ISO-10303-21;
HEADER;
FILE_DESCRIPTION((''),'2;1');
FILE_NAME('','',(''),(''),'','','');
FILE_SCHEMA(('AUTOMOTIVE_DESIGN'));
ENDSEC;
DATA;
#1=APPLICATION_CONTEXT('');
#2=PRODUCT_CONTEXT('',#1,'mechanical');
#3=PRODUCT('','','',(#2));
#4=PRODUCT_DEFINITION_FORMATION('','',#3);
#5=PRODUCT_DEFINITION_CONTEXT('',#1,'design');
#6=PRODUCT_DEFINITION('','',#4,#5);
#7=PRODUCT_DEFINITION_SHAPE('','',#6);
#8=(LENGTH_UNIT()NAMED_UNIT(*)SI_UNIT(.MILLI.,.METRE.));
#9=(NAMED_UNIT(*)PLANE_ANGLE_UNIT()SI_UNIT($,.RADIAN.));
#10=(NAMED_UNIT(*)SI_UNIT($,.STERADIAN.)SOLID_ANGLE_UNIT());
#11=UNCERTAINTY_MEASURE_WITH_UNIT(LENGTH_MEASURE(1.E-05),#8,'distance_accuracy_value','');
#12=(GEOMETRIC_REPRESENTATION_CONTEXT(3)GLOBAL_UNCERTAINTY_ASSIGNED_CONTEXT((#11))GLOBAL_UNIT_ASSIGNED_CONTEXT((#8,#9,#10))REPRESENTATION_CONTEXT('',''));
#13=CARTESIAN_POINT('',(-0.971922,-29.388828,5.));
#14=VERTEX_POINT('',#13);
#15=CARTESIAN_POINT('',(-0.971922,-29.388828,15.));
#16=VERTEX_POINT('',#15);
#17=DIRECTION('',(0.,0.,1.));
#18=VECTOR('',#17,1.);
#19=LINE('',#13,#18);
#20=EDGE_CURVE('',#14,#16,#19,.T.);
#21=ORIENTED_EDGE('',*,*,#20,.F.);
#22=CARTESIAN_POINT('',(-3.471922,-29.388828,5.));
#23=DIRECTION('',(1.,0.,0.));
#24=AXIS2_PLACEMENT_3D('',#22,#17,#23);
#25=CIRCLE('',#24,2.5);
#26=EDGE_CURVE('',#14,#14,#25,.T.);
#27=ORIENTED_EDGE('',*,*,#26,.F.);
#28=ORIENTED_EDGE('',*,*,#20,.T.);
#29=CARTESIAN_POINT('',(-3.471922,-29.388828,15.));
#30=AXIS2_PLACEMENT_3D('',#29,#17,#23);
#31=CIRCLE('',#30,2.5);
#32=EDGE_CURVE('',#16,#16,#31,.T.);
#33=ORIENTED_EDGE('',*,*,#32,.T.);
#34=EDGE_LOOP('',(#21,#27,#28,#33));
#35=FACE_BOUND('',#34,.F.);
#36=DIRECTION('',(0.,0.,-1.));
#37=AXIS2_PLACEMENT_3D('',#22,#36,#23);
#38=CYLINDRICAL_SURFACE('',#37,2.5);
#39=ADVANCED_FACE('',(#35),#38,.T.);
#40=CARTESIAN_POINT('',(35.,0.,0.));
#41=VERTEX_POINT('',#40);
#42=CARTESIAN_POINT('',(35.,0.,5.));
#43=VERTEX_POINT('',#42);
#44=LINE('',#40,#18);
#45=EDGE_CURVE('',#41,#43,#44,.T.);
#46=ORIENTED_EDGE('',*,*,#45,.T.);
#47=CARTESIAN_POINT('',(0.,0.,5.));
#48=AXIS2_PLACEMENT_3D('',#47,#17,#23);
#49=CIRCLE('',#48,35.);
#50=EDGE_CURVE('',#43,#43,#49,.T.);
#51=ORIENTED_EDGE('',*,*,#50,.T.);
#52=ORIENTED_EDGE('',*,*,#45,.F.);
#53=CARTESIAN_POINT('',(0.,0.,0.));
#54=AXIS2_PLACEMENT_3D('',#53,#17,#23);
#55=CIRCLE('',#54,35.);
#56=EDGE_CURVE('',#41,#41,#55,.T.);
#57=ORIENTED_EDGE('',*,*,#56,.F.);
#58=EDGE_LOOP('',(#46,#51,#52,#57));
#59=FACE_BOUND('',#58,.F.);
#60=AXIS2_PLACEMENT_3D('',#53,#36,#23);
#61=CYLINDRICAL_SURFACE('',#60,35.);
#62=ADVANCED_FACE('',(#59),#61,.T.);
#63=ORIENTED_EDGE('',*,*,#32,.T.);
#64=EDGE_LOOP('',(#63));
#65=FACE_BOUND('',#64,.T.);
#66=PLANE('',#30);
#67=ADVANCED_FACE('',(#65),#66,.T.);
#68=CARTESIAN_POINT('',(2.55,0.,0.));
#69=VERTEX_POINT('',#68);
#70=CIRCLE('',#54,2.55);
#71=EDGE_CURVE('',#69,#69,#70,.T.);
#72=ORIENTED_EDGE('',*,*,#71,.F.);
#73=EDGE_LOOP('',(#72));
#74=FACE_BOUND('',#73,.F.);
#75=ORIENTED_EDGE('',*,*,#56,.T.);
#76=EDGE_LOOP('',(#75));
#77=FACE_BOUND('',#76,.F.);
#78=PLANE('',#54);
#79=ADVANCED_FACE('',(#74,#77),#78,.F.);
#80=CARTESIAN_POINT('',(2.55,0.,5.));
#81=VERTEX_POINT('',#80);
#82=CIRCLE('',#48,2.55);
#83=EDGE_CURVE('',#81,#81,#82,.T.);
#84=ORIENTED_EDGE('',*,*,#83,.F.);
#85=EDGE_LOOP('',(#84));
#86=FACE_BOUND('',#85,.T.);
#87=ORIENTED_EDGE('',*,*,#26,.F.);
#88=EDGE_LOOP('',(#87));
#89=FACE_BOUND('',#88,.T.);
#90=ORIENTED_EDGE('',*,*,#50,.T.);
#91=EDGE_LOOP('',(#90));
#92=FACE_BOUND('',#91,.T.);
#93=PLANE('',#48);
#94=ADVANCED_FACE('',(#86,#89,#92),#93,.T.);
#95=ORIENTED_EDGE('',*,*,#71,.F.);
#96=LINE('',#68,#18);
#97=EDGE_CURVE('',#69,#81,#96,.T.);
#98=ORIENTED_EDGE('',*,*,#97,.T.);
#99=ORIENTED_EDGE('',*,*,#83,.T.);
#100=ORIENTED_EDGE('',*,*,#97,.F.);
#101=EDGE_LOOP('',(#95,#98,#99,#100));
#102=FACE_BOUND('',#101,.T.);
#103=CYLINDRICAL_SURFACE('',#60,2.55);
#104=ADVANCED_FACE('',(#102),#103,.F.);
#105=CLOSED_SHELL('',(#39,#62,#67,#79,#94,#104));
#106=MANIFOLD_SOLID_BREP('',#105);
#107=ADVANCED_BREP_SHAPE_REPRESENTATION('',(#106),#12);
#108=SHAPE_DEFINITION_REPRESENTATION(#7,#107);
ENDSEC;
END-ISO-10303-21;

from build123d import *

# Parameters (mm, degrees)
F0_R     = 35
F0_R_2   = 2.55
F1_DEPTH = 5
F2_R     = 2.5
F3_DEPTH = 10


# Not quite as in the source:
# - a feature names something its author has since deleted; it is built from what else it names


with BuildPart() as f1:
    # F0 (on Top) → F1 (new body)
    with BuildSketch(Plane.XY):
        Circle(F0_R)
        Circle(F0_R_2, mode=Mode.SUBTRACT)
    extrude(amount=F1_DEPTH)

    # F2 (on face) → F3 (join)
    with BuildSketch(Plane.XY.offset(5)):
        with Locations((-3.4719216637, -29.3888282031)):
            Circle(F2_R)
    extrude(amount=F3_DEPTH)


solid = f1.part
